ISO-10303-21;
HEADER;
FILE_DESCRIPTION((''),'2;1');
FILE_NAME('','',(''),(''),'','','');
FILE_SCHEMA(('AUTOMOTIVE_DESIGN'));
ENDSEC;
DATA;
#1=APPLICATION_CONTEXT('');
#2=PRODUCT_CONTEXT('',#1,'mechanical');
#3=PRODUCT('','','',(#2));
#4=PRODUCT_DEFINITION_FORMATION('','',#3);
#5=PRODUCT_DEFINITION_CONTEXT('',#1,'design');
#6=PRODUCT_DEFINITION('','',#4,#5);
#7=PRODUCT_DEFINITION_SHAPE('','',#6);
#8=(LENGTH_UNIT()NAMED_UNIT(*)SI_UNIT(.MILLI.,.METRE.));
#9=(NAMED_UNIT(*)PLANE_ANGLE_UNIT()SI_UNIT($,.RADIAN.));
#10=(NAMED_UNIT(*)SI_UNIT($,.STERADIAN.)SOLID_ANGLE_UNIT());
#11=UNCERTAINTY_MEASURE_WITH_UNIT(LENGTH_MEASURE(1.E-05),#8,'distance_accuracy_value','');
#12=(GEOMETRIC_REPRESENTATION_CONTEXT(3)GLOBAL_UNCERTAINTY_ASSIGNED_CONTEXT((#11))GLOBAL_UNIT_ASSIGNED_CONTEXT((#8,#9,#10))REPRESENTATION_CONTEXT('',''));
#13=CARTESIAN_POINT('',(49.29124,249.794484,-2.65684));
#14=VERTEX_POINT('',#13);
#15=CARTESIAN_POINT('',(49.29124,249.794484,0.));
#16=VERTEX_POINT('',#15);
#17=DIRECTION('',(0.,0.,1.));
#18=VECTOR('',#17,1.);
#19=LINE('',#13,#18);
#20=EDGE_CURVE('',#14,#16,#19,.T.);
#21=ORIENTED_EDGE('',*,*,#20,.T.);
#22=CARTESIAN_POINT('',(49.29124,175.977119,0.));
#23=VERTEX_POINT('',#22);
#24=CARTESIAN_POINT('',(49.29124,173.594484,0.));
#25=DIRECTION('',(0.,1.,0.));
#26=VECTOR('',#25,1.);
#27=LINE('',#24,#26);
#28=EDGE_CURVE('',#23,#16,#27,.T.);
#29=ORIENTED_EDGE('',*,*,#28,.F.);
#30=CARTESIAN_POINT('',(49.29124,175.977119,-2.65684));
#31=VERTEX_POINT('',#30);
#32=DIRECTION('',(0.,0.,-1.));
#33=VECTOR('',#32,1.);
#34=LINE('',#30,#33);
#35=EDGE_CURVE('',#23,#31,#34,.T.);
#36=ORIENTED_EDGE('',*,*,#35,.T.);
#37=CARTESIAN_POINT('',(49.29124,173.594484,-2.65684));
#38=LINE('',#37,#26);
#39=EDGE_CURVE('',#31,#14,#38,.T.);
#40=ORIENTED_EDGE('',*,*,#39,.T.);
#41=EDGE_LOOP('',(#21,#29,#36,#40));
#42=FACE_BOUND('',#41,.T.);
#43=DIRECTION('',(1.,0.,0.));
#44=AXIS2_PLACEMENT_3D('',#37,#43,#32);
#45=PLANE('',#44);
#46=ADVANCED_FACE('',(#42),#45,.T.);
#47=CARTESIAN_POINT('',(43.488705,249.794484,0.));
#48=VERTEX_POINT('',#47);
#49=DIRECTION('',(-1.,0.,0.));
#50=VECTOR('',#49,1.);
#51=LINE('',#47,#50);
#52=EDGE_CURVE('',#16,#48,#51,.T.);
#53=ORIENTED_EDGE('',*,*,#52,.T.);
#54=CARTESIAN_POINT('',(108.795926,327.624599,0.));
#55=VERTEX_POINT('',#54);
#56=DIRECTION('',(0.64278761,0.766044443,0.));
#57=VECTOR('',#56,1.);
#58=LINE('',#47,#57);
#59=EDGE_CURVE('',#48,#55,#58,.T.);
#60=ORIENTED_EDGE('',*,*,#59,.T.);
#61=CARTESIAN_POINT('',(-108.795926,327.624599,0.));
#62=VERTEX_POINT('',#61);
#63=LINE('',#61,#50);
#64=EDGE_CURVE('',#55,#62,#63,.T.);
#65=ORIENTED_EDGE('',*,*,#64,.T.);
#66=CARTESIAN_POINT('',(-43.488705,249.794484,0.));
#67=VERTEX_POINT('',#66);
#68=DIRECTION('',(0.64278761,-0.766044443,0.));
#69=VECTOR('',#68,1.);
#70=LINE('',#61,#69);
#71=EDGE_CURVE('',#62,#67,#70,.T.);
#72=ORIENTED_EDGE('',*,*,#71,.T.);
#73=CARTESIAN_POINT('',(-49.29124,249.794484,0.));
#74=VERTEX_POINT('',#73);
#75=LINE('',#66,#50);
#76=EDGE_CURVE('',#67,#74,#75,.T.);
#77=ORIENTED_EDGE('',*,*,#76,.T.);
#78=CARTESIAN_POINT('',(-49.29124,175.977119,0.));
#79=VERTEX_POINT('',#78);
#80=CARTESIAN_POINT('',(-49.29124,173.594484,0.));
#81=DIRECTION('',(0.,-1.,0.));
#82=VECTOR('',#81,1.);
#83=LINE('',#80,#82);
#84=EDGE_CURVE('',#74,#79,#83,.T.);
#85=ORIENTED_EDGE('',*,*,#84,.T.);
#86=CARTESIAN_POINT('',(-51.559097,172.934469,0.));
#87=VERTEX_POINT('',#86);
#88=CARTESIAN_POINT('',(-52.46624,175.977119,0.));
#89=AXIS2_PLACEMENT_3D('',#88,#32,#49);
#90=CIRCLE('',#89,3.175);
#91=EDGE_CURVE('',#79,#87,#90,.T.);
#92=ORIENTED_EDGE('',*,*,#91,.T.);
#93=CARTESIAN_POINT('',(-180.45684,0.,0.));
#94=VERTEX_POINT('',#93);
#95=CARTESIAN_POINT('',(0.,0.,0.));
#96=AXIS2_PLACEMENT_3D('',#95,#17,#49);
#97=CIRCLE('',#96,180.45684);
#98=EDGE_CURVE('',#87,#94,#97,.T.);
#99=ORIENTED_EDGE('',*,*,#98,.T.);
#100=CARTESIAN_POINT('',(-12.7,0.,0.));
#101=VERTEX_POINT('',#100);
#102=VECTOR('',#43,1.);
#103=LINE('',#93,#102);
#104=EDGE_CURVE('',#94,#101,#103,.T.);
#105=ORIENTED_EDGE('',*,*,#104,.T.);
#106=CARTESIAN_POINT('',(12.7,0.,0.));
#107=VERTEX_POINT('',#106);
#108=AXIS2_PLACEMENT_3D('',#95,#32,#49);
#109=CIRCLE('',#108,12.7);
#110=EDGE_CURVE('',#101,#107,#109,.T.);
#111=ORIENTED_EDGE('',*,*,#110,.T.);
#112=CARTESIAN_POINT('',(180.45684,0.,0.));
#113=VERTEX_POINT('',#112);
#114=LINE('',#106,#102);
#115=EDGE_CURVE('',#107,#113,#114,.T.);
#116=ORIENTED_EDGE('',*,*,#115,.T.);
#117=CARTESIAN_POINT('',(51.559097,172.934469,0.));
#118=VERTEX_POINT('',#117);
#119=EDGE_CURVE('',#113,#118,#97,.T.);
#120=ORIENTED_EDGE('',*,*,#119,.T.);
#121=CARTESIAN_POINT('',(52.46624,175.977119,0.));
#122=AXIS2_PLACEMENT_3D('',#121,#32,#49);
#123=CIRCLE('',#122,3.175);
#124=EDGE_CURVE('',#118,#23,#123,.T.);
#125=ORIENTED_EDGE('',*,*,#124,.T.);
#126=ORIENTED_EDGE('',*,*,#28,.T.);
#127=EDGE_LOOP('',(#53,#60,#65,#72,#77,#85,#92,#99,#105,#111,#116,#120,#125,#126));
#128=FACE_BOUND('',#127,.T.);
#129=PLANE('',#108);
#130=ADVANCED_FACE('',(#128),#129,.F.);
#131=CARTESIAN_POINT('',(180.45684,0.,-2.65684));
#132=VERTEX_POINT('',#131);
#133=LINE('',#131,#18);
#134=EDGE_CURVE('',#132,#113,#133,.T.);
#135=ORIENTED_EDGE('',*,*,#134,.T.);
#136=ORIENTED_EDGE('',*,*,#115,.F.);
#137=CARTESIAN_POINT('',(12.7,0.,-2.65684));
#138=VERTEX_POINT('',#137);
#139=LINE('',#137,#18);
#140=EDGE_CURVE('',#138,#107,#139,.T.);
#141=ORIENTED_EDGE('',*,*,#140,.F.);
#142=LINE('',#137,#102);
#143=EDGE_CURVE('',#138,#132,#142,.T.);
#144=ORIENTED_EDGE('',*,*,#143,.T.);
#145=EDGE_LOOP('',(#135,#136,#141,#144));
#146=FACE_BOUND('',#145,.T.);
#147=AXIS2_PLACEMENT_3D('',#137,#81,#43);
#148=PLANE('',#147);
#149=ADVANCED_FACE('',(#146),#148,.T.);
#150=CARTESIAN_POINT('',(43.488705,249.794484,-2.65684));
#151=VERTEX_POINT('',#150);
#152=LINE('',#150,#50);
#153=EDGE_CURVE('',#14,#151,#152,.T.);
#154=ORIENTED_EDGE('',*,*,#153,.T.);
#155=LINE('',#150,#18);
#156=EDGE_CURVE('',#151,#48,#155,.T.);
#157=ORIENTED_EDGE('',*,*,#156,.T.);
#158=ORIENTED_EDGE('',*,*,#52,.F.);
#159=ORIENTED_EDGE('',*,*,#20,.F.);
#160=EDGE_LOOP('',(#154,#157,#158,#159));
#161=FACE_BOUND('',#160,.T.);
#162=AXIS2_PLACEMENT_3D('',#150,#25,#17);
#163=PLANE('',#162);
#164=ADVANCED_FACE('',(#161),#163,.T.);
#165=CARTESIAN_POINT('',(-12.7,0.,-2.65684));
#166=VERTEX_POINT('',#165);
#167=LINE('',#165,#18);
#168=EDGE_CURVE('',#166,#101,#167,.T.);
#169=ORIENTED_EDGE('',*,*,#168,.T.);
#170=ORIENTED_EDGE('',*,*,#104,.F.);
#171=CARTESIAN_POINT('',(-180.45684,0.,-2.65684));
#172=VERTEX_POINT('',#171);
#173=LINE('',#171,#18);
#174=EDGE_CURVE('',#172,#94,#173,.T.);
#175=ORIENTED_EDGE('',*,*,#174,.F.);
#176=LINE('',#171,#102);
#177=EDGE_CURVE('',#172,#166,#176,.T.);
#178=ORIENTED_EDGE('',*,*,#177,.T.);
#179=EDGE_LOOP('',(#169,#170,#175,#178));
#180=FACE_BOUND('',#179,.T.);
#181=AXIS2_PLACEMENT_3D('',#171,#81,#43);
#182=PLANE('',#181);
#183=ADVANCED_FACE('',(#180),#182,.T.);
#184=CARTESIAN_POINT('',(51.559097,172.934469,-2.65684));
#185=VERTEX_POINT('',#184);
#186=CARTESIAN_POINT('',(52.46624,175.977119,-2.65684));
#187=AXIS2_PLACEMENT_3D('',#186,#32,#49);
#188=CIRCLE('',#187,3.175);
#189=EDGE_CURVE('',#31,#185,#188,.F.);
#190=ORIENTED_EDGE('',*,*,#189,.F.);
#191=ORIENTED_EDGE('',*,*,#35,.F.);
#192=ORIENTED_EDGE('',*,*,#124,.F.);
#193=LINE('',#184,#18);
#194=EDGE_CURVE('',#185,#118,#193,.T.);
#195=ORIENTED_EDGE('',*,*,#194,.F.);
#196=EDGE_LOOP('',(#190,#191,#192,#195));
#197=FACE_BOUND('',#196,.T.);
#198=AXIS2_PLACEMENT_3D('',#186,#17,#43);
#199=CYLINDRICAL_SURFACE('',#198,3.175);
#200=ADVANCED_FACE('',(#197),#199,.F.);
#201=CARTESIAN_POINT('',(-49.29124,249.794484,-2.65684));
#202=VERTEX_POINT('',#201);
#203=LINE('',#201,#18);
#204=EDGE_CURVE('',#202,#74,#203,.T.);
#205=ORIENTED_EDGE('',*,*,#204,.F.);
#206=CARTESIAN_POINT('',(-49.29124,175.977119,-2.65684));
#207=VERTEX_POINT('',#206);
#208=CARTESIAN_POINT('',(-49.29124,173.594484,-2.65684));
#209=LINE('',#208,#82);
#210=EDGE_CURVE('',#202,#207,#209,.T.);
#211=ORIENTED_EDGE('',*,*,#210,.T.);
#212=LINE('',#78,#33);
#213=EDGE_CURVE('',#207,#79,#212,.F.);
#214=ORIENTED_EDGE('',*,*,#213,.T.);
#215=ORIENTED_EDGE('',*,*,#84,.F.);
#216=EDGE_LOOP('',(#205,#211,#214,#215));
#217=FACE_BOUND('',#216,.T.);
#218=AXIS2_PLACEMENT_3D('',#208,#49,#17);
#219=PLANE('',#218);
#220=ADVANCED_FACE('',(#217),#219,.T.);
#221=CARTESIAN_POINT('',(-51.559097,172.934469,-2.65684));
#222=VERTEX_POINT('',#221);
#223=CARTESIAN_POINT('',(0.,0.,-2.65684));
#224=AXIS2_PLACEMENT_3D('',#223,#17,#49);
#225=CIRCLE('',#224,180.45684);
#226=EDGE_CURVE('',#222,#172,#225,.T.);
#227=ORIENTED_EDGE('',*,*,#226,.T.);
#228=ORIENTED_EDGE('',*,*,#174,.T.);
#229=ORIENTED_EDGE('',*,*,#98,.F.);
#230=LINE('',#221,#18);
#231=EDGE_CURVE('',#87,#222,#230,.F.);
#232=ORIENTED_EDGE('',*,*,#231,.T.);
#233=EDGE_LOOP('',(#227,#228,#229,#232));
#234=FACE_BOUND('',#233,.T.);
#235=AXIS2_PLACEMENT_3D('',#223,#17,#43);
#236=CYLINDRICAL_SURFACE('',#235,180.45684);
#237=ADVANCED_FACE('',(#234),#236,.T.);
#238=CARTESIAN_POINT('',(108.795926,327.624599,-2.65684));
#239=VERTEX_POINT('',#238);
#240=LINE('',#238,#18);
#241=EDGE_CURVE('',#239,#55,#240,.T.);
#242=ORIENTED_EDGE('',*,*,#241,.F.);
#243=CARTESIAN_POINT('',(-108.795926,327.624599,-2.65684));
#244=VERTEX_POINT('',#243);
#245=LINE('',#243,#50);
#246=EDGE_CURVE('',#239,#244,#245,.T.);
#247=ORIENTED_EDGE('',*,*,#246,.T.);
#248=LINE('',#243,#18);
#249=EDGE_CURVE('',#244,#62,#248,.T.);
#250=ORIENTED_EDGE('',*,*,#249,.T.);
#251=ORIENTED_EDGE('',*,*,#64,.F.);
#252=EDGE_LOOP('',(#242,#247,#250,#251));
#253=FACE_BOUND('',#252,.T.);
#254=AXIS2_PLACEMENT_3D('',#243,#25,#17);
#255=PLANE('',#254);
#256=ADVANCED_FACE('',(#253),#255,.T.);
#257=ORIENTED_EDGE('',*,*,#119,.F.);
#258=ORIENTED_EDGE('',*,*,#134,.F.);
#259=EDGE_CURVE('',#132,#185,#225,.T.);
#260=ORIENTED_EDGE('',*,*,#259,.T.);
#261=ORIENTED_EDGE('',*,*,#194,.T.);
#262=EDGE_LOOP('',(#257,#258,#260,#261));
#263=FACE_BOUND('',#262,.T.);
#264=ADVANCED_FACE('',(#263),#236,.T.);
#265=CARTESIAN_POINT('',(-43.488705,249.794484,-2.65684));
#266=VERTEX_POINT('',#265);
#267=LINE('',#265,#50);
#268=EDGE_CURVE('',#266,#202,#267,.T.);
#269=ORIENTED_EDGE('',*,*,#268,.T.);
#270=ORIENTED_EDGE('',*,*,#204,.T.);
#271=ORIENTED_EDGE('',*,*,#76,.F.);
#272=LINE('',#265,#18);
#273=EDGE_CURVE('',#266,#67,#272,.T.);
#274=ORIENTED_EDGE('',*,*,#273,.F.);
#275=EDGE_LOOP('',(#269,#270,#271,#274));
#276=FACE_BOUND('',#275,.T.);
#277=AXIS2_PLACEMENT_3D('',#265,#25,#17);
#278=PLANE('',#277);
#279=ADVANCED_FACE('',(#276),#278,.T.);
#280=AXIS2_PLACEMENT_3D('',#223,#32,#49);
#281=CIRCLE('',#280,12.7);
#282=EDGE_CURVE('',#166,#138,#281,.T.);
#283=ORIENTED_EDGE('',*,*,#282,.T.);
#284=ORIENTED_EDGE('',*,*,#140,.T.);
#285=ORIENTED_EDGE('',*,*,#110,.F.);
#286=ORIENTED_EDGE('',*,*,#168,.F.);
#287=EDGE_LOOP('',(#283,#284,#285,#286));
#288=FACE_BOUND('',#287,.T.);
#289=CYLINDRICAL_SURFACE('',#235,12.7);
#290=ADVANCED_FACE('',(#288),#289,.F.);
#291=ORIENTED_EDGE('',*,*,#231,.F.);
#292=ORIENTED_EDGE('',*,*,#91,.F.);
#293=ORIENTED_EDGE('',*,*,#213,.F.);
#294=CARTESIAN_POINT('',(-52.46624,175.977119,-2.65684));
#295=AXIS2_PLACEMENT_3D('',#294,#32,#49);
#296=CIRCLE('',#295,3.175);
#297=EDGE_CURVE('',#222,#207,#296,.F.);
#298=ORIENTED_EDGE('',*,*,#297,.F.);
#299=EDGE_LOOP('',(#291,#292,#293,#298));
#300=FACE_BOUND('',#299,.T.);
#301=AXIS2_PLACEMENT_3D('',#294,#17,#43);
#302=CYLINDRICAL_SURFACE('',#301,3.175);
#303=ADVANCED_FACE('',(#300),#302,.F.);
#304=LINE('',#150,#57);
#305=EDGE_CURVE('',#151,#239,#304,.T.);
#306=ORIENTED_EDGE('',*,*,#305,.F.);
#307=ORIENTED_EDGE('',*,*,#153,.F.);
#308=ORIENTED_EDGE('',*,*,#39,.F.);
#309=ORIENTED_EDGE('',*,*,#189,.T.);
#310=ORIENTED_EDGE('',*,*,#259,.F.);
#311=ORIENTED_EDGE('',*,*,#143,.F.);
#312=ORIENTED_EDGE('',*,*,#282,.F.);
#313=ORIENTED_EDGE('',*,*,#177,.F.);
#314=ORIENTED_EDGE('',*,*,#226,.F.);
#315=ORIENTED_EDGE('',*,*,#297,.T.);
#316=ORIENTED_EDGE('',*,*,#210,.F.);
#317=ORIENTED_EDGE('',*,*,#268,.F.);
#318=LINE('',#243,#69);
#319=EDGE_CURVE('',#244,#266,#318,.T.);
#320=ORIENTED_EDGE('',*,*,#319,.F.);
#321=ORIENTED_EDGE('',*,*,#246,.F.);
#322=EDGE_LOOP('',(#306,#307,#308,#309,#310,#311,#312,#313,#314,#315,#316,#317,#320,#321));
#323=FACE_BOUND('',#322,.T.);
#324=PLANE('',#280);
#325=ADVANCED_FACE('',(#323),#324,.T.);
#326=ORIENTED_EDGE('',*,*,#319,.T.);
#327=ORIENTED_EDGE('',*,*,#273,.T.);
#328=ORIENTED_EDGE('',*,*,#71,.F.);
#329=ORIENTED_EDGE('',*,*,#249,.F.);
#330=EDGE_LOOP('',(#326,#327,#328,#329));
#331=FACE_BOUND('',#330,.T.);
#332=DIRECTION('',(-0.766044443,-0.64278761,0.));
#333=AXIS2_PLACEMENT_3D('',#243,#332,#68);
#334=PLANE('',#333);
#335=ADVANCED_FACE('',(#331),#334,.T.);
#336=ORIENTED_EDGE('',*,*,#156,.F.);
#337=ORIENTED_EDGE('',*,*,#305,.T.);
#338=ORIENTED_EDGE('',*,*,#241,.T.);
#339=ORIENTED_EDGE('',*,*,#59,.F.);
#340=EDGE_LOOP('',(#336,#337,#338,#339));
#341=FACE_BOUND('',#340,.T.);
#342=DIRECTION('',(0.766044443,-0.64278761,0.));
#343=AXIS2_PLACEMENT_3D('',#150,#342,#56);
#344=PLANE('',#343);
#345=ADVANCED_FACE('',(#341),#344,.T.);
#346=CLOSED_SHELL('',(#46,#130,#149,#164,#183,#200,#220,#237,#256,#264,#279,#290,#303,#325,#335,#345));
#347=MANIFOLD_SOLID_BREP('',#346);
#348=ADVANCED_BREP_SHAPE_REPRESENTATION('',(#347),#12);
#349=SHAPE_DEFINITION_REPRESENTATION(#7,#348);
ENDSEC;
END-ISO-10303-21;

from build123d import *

# Parameters (mm, degrees)
BASE_FLANGE1_DEPTH = 2.65684
FILLET1_R          = 3.175


# Sheet-metal steps are written as plain solids
with BuildPart() as part:
    # Sketch1 → Base-Flange1 (new body)
    with BuildSketch(Plane.XY):
        with BuildLine():
            Line((-180.45684, 0), (-12.7, 0))
            ThreePointArc((-12.7, 0), (0, 12.7), (12.7, 0))
            Line((12.7, 0), (180.45684, 0))
            ThreePointArc((180.45684, 0), (143.97849234, 108.788165011), (49.29124, 173.594483674))
            Line((49.29124, 173.594483674), (49.29124, 249.794483674))
            Line((49.29124, 249.794483674), (43.488704599, 249.794483674))
            Line((43.488704599, 249.794483674), (108.795925743, 327.624599095))
            Line((108.795925743, 327.624599095), (-108.795925743, 327.624599095))
            Line((-108.795925743, 327.624599095), (-43.488704599, 249.794483674))
            Line((-43.488704599, 249.794483674), (-49.29124, 249.794483674))
            Line((-49.29124, 249.794483674), (-49.29124, 173.594483674))
            ThreePointArc((-49.29124, 173.594483674), (-143.97849234, 108.788165011), (-180.45684, 0))
        make_face()
    extrude(amount=-BASE_FLANGE1_DEPTH)

    # Fillet1
    fillet1_edges = [part.edges().sort_by_distance(p)[0] for p in [
        (-49.29124, 173.594483674, -1.32842),
        (49.29124, 173.594483674, -1.32842),
    ]]
    fillet(fillet1_edges, radius=FILLET1_R)


solid = part.part
